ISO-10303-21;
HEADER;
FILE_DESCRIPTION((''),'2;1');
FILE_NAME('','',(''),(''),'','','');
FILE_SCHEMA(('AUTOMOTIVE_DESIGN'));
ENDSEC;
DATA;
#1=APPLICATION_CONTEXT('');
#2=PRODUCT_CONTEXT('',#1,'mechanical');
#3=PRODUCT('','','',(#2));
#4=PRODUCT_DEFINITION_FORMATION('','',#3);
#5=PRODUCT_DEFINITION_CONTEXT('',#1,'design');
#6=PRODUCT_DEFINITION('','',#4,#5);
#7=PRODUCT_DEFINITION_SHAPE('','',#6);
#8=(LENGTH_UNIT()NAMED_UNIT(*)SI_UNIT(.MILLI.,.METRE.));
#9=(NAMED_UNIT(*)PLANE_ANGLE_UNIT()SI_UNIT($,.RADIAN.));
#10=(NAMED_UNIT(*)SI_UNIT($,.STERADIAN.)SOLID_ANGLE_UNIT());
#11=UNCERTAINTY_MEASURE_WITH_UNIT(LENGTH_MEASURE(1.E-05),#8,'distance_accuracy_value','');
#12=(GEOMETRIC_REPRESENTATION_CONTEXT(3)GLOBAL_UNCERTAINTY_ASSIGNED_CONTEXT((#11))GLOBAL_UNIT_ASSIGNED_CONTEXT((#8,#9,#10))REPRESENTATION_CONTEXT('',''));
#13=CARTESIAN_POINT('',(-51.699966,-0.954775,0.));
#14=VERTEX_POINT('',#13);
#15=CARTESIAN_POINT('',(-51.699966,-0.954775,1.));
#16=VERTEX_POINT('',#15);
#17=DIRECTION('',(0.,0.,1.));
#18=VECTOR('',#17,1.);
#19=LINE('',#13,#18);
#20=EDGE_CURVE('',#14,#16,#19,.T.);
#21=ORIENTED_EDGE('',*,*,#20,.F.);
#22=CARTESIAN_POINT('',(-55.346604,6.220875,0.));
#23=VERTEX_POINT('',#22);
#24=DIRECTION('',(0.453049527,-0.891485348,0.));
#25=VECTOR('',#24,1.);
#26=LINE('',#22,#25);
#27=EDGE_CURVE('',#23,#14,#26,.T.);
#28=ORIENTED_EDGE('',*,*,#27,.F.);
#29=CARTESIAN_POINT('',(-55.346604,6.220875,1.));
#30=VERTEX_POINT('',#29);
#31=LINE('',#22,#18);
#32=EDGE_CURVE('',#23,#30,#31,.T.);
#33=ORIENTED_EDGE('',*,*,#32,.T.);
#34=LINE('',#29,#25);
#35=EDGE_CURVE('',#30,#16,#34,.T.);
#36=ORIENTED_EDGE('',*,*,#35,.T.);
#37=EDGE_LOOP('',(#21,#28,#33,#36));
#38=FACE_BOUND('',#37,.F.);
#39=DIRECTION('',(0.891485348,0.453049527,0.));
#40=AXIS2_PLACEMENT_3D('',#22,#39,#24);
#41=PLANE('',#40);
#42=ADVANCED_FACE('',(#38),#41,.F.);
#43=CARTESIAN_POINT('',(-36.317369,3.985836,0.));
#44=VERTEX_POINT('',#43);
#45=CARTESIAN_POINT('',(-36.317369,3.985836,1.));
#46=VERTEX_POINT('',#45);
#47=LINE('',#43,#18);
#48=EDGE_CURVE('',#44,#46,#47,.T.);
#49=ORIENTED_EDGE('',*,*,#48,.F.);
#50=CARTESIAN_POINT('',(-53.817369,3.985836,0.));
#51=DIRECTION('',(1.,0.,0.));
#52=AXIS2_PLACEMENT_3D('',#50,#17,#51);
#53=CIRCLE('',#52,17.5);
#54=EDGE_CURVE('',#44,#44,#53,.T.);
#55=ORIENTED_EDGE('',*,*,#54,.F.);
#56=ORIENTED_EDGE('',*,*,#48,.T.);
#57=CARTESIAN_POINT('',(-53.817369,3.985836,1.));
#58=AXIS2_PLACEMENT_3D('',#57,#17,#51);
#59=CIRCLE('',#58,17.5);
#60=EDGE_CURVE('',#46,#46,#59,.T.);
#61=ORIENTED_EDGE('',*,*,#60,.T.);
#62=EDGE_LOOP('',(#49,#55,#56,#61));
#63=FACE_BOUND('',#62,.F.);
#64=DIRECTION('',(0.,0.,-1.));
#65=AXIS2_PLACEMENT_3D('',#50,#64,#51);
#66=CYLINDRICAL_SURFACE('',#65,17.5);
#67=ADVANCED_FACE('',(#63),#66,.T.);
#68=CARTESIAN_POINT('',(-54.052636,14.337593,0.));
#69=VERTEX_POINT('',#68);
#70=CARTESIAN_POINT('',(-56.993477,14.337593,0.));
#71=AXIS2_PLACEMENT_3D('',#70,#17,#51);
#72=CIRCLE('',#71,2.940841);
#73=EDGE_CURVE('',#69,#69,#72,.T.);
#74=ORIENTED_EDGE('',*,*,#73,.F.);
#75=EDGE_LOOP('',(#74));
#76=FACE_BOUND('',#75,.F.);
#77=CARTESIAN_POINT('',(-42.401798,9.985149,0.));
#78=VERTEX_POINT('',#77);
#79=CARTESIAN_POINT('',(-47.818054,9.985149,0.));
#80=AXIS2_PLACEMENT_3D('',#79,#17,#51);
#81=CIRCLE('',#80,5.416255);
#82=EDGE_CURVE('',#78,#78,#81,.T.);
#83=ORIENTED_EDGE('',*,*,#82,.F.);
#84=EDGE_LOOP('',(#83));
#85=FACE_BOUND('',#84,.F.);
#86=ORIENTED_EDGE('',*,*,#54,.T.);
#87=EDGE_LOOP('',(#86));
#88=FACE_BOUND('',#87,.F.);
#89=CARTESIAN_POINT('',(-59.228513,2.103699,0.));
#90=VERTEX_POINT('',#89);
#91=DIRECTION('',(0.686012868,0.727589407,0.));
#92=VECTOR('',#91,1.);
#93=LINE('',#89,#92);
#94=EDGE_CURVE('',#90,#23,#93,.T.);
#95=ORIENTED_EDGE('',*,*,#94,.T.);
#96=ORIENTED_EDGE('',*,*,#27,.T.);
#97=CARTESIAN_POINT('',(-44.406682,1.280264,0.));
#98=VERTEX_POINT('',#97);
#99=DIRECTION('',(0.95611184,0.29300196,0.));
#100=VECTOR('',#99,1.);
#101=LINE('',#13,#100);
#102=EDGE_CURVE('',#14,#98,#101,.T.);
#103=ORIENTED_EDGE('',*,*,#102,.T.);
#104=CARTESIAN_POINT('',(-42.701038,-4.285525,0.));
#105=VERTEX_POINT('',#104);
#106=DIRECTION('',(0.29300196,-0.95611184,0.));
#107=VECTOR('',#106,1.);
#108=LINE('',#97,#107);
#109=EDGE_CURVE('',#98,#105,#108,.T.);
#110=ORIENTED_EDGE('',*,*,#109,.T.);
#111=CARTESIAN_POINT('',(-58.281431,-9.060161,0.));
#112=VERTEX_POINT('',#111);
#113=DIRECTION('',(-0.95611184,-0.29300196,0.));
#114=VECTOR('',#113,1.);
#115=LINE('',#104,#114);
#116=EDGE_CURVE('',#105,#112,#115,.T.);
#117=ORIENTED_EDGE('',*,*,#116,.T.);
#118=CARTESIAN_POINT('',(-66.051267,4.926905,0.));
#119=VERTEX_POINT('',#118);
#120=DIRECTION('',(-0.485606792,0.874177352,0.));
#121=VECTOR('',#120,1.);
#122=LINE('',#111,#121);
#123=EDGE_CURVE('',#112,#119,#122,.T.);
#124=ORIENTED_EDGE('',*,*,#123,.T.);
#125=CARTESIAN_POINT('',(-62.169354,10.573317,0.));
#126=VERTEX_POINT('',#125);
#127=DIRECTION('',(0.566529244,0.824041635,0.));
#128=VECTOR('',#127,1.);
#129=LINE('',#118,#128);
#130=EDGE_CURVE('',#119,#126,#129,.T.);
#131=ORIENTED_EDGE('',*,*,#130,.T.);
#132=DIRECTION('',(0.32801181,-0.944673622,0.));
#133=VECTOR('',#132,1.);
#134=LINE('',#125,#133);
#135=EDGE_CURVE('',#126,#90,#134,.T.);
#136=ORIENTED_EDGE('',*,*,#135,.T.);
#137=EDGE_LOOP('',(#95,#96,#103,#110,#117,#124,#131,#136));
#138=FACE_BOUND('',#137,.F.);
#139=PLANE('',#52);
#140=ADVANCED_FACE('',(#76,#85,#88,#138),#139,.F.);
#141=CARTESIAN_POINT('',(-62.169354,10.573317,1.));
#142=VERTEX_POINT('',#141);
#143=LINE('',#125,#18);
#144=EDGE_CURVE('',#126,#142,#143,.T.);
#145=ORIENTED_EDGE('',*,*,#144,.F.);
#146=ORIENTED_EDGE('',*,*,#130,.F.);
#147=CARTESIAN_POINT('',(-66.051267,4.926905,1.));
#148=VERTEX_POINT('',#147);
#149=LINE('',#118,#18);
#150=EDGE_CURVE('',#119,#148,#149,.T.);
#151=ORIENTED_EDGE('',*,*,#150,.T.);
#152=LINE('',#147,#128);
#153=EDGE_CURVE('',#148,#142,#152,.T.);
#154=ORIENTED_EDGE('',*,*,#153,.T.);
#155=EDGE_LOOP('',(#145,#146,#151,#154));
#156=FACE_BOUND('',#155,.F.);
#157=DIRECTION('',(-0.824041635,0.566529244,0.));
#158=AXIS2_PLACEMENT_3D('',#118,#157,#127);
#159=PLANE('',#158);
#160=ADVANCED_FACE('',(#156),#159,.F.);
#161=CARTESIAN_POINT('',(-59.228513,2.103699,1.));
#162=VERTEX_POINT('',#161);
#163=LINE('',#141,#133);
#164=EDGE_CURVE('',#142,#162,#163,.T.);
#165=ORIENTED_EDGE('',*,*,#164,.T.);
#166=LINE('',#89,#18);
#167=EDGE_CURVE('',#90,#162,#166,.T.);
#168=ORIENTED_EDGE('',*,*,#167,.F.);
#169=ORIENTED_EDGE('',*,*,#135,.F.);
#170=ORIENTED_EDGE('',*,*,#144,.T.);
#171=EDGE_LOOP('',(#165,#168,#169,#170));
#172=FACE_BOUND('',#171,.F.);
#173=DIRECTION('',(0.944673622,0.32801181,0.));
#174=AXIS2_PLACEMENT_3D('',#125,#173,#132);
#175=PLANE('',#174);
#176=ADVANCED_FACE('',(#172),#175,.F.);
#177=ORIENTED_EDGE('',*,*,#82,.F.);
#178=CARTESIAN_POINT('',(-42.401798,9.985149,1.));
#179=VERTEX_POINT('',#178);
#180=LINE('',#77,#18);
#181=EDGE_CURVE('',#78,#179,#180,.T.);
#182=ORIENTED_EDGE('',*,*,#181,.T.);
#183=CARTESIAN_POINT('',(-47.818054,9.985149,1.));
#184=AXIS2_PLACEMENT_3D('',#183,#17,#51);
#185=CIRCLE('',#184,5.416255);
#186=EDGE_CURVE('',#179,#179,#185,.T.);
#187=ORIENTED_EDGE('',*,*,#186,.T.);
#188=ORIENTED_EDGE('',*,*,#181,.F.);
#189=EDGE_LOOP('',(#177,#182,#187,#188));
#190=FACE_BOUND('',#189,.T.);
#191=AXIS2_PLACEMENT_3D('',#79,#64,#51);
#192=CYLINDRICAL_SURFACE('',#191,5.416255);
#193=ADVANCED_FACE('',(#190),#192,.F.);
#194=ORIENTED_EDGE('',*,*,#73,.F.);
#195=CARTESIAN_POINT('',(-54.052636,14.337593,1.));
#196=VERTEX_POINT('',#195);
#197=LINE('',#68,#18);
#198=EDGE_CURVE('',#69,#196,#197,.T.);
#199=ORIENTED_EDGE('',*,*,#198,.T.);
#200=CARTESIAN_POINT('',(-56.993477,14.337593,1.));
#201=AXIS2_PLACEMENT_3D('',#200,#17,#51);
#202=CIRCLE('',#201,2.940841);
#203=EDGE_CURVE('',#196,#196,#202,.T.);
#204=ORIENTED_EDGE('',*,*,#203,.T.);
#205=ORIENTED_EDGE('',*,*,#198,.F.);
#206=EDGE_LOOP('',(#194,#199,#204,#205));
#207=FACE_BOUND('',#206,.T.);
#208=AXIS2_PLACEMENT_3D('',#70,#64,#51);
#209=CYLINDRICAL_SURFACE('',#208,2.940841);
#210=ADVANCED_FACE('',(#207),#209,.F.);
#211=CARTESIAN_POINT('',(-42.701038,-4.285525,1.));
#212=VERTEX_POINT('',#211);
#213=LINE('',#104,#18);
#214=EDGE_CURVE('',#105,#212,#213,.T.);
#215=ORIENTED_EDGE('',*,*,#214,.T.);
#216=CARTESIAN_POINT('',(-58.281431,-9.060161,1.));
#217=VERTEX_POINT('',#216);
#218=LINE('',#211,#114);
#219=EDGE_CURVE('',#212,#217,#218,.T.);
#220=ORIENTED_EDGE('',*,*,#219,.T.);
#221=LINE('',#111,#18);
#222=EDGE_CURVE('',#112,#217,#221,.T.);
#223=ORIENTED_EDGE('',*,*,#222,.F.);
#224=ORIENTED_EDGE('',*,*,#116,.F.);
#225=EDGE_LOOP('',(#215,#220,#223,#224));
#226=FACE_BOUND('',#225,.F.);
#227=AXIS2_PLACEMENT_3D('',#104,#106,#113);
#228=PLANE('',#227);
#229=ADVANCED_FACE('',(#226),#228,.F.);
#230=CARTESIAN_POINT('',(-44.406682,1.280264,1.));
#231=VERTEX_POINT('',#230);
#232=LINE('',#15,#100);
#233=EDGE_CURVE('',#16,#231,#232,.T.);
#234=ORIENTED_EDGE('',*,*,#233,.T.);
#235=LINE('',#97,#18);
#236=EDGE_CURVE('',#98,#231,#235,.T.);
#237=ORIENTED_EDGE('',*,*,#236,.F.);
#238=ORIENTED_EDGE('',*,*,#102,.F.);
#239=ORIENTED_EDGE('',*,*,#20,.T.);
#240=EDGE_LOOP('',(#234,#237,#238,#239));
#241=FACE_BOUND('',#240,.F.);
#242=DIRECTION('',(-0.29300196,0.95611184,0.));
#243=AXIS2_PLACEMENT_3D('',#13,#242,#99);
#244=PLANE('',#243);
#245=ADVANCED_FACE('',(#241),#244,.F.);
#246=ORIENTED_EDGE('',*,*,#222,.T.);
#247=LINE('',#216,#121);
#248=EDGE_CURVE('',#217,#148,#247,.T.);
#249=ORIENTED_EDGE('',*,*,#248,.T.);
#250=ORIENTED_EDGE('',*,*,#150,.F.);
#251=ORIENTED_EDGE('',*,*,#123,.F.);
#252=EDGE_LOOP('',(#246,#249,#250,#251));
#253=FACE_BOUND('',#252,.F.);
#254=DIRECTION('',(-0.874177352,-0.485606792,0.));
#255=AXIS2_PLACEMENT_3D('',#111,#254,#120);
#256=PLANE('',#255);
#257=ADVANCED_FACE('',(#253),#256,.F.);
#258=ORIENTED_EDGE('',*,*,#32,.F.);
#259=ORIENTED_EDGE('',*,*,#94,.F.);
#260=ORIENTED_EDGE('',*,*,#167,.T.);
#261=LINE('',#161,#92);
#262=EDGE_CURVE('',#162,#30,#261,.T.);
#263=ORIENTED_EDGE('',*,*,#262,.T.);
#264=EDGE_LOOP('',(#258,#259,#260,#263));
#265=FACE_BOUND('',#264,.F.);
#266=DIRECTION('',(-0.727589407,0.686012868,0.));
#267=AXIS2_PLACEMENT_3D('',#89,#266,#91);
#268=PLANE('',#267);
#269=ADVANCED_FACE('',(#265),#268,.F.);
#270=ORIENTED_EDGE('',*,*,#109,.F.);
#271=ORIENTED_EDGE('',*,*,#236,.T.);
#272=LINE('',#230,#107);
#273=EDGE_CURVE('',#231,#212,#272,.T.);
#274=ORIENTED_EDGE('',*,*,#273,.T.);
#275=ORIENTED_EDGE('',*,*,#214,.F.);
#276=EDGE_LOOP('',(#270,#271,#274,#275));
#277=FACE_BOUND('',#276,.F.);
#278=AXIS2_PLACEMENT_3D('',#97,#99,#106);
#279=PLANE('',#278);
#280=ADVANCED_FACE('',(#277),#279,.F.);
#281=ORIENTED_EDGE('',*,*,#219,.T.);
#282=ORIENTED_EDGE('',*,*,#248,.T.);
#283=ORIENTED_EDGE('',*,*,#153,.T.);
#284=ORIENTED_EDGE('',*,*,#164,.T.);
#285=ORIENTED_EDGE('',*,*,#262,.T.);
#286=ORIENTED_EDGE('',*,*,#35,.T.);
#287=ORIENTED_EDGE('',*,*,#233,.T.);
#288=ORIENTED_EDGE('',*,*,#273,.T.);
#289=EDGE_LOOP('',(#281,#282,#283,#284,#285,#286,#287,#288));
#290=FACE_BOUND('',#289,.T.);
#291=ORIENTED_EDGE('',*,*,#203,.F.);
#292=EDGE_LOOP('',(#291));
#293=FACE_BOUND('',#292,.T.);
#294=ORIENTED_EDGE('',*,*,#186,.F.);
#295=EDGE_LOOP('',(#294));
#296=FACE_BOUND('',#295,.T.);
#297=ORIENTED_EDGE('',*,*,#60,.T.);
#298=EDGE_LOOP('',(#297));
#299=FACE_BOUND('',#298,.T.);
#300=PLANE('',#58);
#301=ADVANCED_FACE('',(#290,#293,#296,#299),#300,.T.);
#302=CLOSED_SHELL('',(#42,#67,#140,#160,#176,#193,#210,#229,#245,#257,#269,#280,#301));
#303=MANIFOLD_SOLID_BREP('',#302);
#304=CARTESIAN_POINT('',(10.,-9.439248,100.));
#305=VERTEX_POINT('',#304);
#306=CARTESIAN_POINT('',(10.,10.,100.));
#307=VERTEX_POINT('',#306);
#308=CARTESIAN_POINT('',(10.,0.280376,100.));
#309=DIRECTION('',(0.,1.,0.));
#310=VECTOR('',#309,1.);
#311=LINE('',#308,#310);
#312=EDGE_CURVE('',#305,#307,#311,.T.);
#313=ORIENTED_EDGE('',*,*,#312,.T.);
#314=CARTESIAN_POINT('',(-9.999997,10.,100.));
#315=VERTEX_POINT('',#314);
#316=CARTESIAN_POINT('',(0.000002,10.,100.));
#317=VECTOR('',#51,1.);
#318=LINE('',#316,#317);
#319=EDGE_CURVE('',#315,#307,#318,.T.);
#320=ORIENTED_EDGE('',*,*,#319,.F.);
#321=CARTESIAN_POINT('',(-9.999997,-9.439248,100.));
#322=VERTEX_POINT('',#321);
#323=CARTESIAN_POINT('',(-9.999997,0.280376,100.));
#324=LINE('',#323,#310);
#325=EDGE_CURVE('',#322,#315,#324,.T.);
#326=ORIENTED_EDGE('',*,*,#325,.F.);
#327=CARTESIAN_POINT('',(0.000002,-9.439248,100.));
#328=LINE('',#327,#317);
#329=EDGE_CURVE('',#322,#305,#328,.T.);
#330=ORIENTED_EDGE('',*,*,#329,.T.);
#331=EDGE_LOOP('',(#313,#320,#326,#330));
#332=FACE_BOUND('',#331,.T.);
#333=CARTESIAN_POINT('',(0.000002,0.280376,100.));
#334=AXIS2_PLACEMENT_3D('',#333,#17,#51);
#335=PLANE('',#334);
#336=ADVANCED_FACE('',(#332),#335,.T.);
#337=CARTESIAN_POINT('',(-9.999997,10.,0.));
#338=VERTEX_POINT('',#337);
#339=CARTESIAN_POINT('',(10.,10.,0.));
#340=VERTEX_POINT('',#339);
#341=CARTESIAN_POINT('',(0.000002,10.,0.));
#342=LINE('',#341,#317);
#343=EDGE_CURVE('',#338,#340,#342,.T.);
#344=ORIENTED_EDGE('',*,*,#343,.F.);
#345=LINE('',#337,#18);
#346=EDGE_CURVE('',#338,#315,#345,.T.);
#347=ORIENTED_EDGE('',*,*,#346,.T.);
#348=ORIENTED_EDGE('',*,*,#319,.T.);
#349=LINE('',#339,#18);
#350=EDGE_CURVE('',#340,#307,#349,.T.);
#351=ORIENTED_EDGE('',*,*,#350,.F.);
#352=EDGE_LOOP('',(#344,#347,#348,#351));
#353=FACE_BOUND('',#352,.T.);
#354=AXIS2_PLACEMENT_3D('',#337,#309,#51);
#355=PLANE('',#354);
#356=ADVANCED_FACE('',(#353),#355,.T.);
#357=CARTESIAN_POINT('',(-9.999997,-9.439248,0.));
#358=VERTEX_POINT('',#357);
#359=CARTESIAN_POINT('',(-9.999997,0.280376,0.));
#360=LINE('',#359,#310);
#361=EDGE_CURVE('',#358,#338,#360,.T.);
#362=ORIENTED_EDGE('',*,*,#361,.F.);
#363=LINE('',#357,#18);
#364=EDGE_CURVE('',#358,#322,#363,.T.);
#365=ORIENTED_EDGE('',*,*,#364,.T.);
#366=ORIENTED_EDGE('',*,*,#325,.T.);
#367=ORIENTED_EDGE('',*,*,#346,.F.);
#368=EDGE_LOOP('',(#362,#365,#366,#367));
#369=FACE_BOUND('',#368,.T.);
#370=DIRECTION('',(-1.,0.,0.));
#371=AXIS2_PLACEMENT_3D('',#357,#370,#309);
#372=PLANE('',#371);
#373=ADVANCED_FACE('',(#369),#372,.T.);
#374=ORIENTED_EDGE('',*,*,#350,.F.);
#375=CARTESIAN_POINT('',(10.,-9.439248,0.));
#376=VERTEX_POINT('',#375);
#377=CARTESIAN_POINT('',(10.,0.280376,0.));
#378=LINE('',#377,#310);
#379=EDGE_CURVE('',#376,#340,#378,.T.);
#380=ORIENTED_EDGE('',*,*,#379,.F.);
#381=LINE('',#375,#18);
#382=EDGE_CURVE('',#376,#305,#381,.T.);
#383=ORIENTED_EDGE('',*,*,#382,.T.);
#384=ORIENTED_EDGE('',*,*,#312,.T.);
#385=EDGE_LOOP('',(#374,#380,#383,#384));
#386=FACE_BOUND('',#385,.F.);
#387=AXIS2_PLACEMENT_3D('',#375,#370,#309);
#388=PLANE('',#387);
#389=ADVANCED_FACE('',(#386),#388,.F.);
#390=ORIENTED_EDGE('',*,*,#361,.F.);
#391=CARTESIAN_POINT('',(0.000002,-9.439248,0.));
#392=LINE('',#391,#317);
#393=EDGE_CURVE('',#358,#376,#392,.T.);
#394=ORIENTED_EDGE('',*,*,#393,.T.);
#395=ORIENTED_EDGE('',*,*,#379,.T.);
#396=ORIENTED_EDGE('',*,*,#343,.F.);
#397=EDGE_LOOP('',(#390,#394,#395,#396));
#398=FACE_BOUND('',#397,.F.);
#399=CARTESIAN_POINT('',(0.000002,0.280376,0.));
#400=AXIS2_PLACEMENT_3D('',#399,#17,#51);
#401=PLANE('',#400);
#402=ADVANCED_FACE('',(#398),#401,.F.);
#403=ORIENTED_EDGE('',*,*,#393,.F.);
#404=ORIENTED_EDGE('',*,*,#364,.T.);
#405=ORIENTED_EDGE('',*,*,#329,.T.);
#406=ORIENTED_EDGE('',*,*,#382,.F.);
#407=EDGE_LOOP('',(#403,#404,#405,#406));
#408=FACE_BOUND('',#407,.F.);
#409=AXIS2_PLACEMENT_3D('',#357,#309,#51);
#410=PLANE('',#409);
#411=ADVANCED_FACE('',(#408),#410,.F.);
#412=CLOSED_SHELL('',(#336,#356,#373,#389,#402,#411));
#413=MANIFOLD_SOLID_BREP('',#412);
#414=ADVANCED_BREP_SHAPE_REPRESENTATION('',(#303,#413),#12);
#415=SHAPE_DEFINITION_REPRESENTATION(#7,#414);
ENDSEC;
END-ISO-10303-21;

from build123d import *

# Parameters (mm, degrees)
F0_W     = 19.9999965323
F0_H     = 19.4392482125
F0_W_2   = 18.7999965323
F0_H_2   = 18.2392482125
F1_DEPTH = 100
F0_R     = 17.5
F0_R_2   = 5.4162553958
F0_R_3   = 2.9408408329
F2_DEPTH = 1


with BuildPart() as f1:
    # F0 (on Top) → F1 (new body)
    with BuildSketch(Plane.XY):
        with Locations((1.7338e-06, 0.2803758938)):
            Rectangle(F0_W, F0_H)
        with Locations((1.7338e-06, 0.2803758938)):
            Rectangle(F0_W_2, F0_H_2, mode=Mode.SUBTRACT)
        with Locations((1.7338e-06, 0.2803758938)):
            Rectangle(F0_W_2, F0_H_2)
    extrude(amount=F1_DEPTH)


with BuildPart() as f2:
    # F0 (on Top) → F2 (new body)
    with BuildSketch(Plane.XY):
        with Locations((-53.8173690438, 3.9858361706)):
            Circle(F0_R)
        Polygon((-58.2814313382, -9.0601613548), (-66.0512670875, 4.926905036), (-62.169354409, 10.5733172968), (-59.2285133898, 2.1036986727), (-55.3466044366, 6.2208748423), (-51.6999661922, -0.9547745576), (-44.4066822529, 1.2802636484), (-42.7010375303, -4.2855254412), align=None, mode=Mode.SUBTRACT)
        with Locations((-47.8180535138, 9.9851489067)):
            Circle(F0_R_2, mode=Mode.SUBTRACT)
        with Locations((-56.9934770465, 14.3375927582)):
            Circle(F0_R_3, mode=Mode.SUBTRACT)
    extrude(amount=F2_DEPTH)


solid = Compound([f1.part, f2.part])
